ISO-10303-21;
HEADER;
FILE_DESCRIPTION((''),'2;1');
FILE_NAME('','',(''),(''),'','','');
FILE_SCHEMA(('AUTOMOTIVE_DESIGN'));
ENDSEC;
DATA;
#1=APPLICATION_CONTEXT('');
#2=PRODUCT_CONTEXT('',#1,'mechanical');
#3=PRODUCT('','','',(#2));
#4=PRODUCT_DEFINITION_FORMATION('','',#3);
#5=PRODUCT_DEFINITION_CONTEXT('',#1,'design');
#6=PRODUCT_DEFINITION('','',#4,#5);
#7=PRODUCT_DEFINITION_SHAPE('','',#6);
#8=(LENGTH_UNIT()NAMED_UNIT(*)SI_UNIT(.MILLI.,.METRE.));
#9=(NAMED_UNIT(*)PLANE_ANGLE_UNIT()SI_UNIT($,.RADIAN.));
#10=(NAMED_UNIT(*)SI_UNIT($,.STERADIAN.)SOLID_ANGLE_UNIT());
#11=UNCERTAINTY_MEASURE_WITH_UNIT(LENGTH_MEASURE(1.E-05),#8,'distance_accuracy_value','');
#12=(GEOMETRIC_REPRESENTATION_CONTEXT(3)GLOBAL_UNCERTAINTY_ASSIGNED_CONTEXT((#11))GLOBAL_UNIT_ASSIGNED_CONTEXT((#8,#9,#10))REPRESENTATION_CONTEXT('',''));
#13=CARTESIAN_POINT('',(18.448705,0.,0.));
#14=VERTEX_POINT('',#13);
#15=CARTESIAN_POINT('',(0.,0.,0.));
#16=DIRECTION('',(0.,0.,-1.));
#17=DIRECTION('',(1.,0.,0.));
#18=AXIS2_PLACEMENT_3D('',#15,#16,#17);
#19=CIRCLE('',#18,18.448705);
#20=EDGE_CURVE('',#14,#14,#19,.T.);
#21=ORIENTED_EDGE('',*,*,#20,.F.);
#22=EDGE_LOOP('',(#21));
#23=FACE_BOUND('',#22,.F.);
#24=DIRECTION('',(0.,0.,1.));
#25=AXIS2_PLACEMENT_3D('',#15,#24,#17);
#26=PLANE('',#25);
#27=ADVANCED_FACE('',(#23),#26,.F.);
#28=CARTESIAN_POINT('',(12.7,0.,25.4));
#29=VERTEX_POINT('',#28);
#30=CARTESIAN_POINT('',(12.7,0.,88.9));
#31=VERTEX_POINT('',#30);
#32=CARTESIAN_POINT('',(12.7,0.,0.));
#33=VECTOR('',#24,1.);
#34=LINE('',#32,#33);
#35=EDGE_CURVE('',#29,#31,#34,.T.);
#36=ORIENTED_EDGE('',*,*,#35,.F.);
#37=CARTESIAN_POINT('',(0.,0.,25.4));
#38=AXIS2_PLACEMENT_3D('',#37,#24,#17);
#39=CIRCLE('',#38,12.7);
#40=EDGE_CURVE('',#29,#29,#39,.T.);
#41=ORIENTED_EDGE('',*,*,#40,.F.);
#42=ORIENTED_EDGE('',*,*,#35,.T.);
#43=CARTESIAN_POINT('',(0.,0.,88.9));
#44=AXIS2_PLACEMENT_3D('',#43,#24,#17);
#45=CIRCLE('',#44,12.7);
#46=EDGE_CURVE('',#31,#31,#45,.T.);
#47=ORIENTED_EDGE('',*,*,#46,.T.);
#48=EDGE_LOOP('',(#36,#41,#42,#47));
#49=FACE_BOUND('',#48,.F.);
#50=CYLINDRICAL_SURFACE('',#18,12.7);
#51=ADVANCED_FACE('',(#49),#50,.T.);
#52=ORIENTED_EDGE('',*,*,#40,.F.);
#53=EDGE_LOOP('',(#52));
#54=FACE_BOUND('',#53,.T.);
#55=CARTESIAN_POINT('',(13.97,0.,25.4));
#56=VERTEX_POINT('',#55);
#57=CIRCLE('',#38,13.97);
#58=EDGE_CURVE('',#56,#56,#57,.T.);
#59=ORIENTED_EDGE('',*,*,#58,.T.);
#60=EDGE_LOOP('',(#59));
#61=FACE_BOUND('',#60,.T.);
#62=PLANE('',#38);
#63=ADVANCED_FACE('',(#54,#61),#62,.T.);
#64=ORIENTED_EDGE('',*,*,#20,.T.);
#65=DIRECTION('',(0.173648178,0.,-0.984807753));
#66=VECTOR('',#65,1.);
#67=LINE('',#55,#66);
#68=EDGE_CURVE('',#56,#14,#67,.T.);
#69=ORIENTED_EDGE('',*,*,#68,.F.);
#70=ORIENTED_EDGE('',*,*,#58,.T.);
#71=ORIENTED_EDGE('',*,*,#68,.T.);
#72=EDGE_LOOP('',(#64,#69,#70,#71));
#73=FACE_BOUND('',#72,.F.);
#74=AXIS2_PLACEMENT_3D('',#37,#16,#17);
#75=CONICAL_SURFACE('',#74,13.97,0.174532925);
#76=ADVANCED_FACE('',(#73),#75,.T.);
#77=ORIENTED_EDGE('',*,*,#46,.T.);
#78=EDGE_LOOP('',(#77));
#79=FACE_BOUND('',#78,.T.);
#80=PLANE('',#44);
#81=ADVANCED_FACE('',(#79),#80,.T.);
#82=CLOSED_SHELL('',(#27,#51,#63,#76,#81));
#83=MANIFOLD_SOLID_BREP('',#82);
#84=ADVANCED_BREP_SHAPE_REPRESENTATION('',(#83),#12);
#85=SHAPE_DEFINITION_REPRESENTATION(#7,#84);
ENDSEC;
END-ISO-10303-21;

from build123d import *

# Parameters (mm, degrees)
F0_R     = 12.7
F1_DEPTH = 88.9
F0_R_2   = 19.05
F2_DEPTH = 25.4


# Not quite as in the source:
# - a fillet or chamfer that OpenCascade refuses, or shapes differently, is made with other operations: its cross-section is extruded or revolved along the edge and cut away or added


with BuildPart() as f1:
    # F0 (on Top) → F1 (new body)
    with BuildSketch(Plane.XY):
        Circle(F0_R)
    extrude(amount=F1_DEPTH)

    # F0 (on Top) → F2 (join)
    with BuildSketch(Plane.XY):
        Circle(F0_R_2)
        Circle(F0_R, mode=Mode.SUBTRACT)
    extrude(amount=F2_DEPTH)

    # F3: chamfer of 5.08 x 28.8101116437 on 1 edges, made by hand

    # F3_s1 → F3_t2 (revolve, cut)
    with BuildSketch(Plane.XZ):
        Polygon((13.97, 25.4), (19.05, -3.4101116437), (19.05, 25.4), align=None)
    revolve(axis=Axis((0, 0, 25.4), (0, 0, 1)), mode=Mode.SUBTRACT)


solid = f1.part
